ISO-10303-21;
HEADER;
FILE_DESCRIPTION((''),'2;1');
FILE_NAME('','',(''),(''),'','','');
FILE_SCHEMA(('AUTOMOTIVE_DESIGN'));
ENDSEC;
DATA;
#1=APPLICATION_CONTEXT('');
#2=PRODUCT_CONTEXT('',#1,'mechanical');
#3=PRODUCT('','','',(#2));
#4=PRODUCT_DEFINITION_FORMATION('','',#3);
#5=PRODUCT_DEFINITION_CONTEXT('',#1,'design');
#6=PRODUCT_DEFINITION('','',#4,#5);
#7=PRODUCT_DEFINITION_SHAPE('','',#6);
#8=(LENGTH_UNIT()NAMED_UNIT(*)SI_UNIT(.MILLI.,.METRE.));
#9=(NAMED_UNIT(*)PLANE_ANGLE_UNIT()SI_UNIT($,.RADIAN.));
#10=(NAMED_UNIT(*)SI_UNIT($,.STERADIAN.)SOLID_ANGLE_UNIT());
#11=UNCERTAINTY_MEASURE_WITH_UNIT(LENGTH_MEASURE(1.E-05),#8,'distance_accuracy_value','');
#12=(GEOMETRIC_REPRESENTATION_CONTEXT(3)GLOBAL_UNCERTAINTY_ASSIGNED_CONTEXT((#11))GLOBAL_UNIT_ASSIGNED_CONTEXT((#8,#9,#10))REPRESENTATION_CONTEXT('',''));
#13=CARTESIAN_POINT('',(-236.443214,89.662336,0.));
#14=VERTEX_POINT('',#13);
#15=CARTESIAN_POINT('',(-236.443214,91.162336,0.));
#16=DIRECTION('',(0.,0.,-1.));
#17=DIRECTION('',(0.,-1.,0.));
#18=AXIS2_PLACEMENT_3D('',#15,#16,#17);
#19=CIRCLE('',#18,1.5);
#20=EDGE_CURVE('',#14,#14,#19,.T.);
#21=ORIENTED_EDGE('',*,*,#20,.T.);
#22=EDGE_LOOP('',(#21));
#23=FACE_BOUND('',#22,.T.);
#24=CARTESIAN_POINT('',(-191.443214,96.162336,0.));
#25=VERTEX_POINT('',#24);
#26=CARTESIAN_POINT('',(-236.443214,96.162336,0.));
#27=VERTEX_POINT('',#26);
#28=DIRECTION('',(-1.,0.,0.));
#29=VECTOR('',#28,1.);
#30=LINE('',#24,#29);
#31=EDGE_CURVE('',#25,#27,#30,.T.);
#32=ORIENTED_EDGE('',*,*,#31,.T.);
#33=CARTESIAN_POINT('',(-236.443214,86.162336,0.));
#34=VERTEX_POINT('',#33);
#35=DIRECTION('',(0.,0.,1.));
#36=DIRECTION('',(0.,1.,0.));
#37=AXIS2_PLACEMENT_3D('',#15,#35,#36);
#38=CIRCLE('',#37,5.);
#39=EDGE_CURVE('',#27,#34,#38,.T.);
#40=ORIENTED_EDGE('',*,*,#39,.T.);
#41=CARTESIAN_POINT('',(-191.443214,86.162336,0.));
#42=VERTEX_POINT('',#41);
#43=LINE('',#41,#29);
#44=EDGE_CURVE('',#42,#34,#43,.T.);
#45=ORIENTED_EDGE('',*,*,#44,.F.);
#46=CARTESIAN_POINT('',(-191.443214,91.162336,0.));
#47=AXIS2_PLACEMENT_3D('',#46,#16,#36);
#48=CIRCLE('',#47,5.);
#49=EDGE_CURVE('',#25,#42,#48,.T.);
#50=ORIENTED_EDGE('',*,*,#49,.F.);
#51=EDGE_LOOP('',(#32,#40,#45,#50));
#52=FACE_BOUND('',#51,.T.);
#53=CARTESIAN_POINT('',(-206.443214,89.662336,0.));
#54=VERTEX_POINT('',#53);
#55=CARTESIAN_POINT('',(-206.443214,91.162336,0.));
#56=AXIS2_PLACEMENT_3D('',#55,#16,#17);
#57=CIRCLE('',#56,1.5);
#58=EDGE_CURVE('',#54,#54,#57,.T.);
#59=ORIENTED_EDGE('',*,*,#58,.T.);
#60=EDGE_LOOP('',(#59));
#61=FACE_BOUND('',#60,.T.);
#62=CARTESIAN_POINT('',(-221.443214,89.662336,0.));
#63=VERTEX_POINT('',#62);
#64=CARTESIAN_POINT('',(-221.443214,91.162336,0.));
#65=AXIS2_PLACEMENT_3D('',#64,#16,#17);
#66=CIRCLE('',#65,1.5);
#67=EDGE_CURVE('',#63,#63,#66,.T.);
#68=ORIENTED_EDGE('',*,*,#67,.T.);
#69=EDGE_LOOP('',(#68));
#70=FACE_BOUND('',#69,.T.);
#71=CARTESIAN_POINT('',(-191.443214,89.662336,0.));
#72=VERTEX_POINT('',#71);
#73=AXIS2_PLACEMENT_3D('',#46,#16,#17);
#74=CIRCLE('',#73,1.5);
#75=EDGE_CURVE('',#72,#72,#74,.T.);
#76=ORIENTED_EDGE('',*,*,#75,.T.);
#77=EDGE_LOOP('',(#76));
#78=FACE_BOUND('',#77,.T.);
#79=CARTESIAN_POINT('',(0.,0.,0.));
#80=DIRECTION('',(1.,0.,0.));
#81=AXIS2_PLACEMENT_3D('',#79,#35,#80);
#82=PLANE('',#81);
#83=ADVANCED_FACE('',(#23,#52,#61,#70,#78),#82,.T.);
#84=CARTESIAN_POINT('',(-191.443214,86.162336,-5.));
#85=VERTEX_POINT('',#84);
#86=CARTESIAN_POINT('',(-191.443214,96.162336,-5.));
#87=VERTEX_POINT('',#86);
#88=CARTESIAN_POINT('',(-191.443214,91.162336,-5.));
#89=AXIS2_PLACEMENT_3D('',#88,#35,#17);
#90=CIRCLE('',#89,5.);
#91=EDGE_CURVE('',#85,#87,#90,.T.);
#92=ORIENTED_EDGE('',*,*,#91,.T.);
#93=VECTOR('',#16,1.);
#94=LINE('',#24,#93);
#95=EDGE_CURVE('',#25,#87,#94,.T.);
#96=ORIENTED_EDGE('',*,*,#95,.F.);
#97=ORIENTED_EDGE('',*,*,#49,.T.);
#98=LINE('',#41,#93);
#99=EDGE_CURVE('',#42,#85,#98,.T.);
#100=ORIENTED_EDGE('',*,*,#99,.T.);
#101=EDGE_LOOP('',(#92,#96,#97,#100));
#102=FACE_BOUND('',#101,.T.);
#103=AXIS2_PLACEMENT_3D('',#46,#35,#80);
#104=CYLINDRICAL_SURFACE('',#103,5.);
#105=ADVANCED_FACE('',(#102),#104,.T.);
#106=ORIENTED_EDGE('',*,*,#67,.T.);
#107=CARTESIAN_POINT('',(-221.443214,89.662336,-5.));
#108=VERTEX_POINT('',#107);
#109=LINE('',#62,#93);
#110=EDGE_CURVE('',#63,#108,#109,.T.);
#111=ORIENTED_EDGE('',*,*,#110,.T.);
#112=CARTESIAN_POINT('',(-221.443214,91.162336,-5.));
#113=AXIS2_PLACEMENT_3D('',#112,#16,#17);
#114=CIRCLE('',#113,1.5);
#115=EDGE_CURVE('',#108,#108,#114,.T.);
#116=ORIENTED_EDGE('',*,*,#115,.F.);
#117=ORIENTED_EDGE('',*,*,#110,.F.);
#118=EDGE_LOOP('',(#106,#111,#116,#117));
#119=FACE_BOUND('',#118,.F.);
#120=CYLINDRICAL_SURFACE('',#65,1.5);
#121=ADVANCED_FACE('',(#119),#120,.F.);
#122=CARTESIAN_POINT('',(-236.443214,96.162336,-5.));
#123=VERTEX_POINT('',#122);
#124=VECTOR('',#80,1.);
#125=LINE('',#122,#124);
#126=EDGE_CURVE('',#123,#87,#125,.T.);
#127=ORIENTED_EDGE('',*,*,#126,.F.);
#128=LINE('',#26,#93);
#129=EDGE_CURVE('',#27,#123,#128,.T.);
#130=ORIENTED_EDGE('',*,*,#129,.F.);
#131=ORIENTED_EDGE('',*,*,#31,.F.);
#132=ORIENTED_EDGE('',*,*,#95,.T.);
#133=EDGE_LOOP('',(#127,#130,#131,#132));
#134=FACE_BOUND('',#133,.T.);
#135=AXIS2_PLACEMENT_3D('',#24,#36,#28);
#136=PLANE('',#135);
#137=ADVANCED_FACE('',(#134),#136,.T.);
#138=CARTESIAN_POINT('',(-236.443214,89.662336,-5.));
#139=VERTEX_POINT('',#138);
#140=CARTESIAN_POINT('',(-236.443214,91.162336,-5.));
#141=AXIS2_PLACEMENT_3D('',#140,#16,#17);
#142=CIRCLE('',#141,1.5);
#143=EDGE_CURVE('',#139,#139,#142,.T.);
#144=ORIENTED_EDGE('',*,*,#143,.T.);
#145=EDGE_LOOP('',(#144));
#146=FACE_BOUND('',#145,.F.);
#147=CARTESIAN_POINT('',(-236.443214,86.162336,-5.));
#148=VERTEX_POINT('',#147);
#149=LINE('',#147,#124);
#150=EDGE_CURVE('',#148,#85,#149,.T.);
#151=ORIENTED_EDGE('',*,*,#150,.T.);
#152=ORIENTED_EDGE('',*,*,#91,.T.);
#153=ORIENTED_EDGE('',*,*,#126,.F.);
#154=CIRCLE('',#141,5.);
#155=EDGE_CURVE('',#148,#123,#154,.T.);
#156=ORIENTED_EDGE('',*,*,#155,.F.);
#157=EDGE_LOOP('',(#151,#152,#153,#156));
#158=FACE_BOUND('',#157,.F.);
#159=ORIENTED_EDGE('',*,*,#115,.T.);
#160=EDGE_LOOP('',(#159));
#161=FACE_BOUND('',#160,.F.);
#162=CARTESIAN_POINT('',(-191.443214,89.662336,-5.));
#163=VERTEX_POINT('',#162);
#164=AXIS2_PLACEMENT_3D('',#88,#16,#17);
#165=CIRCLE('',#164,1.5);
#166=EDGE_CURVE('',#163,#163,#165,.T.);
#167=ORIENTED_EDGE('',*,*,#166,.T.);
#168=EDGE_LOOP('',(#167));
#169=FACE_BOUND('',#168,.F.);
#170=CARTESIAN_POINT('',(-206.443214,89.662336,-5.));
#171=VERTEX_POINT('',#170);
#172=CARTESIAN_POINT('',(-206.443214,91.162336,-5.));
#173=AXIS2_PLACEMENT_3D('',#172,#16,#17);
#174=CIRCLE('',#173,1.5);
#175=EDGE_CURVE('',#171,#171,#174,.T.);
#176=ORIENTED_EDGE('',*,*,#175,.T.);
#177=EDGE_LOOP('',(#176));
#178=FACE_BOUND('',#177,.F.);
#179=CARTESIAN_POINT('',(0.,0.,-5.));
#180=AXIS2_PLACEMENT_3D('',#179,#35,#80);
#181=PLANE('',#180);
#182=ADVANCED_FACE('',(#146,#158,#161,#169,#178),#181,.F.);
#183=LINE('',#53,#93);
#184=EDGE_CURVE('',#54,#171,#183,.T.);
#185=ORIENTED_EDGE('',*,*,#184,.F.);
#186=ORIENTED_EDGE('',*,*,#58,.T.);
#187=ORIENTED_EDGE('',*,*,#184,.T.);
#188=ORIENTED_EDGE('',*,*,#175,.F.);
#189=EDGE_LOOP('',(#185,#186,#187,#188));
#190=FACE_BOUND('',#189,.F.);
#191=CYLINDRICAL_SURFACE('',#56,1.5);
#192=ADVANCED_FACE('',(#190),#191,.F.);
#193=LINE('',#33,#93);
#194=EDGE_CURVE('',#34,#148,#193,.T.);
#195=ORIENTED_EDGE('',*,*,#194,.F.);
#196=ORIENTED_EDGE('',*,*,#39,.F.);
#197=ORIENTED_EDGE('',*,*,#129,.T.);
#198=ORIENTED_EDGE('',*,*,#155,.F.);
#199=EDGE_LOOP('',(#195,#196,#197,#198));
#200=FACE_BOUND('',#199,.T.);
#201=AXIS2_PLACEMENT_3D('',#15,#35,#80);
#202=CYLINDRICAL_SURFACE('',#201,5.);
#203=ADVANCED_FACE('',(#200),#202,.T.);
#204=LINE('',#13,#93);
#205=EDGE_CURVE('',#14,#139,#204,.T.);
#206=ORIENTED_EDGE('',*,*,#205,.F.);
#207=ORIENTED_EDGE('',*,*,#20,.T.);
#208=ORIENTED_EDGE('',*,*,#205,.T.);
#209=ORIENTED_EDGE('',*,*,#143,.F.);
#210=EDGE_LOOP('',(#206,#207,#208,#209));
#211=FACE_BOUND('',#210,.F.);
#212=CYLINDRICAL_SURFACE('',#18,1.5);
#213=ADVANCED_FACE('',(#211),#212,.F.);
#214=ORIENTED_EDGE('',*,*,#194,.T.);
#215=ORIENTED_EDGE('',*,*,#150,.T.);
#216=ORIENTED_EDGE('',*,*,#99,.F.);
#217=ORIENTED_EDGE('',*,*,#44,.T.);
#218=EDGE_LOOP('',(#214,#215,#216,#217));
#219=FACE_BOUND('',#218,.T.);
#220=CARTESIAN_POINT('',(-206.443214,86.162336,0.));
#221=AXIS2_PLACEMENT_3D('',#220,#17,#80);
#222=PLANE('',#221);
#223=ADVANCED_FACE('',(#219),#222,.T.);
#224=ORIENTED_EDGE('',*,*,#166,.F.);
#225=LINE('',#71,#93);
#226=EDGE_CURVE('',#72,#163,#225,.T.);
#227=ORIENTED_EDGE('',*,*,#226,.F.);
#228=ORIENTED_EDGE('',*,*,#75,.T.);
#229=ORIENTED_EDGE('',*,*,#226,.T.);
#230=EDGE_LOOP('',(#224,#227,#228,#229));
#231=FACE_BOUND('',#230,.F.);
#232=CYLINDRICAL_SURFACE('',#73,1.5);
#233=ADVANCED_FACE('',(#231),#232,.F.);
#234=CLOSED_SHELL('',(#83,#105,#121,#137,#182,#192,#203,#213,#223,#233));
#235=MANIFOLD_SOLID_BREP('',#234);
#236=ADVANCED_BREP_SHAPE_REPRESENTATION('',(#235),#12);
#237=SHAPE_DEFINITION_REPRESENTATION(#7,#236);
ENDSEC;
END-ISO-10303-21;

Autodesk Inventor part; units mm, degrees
ref_plane "YZ Plane" through (0, 0, 0) normal (1, 0, 0) x (0, 1, 0)
ref_plane "XZ Plane" through (0, 0, 0) normal (0, 1, 0) x (-1, 0, 0)
ref_plane "XY Plane" through (0, 0, 0) normal (0, 0, 1) x (1, 0, 0)
sketch "スケッチ1" plane through (0, 0, 0) normal (0, 0, 1) x (1, 0, 0)
  circle A0 centre (-137.47813, 108.715013) radius 1.5
  circle A1 centre (-137.47813, 108.715013) radius 4
  circle A2 centre (-84.833891, 108.084965) radius 1.5
  circle A3 centre (-84.833891, 108.084965) radius 4
  arc A4 (-118.947299, 71.123436) -> (-117.73095, 71.382243) centre (-118.502117, 72.018876) ccw
  arc A5 (-114.600271, 73.907195) -> (-117.73095, 71.382243) centre (-110, 65) ccw
  arc A6 (-114.600271, 73.907195) -> (-114.089743, 75.041147) centre (-115.059151, 74.795694) ccw
  line L0 (-114.089743, 75.041147) -> (-119.33341, 95.750821)
  arc A7 (-119.33341, 95.750821) -> (-120.080809, 96.480412) centre (-120.302818, 95.505368) ccw
  arc A8 (-121.730917, 97.23053) -> (-120.080809, 96.480412) centre (-119.081767, 100.868113) ccw
  arc A9 (-121.730917, 97.23053) -> (-122.772044, 97.31398) centre (-122.319616, 96.422178) ccw
  line L1 (-122.772044, 97.31398) -> (-145.176978, 85.94755)
  arc A10 (-145.176978, 85.94755) -> (-145.169733, 84.160308) centre (-144.724551, 85.055748) ccw
  line L2 (-145.169733, 84.160308) -> (-118.947299, 71.123436)
  arc A11 (-111.181518, 75.777506) -> (-110.19287, 75.023145) centre (-110.212109, 76.022959) ccw
  arc A12 (-100.681376, 68.696468) -> (-110.19287, 75.023145) centre (-110, 65) ccw
  arc A13 (-100.681376, 68.696468) -> (-99.603497, 68.076257) centre (-99.751838, 69.065193) ccw
  line L3 (-99.603497, 68.076257) -> (-77.042446, 71.460414)
  arc A14 (-77.042446, 71.460414) -> (-76.670938, 73.303609) centre (-77.190786, 72.449351) ccw
  line L4 (-76.670938, 73.303609) -> (-114.637331, 96.407596)
  arc A15 (-114.637331, 96.407596) -> (-116.126588, 95.307885) centre (-115.15718, 95.553338) ccw
  line L5 (-116.126588, 95.307885) -> (-111.181518, 75.777506)
  circle A16 centre (-150.294817, 85.033166) radius 1.5
  arc A17 (-124.129325, 99.989384) -> (-123.581755, 100.878808) centre (-124.581752, 100.881185) ccw
  arc A18 (-114.594354, 100.531773) -> (-123.581755, 100.878808) centre (-119.081767, 100.868113) ccw
  arc A19 (-114.594354, 100.531773) -> (-114.117, 99.602773) centre (-113.597151, 100.457031) ccw
  line L6 (-114.117, 99.602773) -> (-73.405222, 74.828115)
  arc A20 (-73.405222, 74.828115) -> (-72.36076, 74.831033) centre (-72.885373, 75.682374) ccw
  arc A21 (-73.660486, 68.382589) -> (-72.36076, 74.831033) centre (-70, 71) ccw
  arc A22 (-73.660486, 68.382589) -> (-74.622268, 68.789879) centre (-74.473928, 67.800942) ccw
  line L7 (-74.622268, 68.789879) -> (-99.158476, 65.109447)
  arc A23 (-99.158476, 65.109447) -> (-100.006948, 64.200283) centre (-99.010135, 64.120511) ccw
  arc A24 (-119.754961, 67.311137) -> (-100.006948, 64.200283) centre (-110, 65) ccw
  arc A25 (-119.754961, 67.311137) -> (-120.282843, 68.437115) centre (-120.728025, 67.541674) ccw
  line L8 (-120.282843, 68.437115) -> (-147.085218, 81.762313)
  arc A26 (-147.085218, 81.762313) -> (-148.083283, 81.700131) centre (-147.5304, 80.866873) ccw
  arc A27 (-148.11038, 88.384022) -> (-148.083283, 81.700131) centre (-150.294817, 85.033166) ccw
  arc A28 (-148.11038, 88.384022) -> (-147.111844, 88.329935) centre (-147.564271, 89.221736) ccw
  line L9 (-147.111844, 88.329935) -> (-124.129325, 99.989384)
  circle A29 centre (-110, 65) radius 7.025
  circle A30 centre (-119.081767, 100.868113) radius 1.5
  circle A31 centre (-70, 71) radius 1.5
  line L10 (-330.399972, 95) -> (-110, 65)
  circle A32 centre (-156.443214, 91.162336) radius 4
  circle A33 centre (-136.470623, 92.209055) radius 4
  line L11 (0, 0) -> (-155.794817, 0)
  line L12 (-329.051247, 104.90863) -> (-108.651275, 74.90863)
  circle A34 centre (-156.443214, 91.162336) radius 9
  circle A35 centre (-136.470623, 92.209055) radius 6
  line L13 (-156.443214, 91.162336) -> (-136.470623, 92.209055)
  circle A36 centre (-110, 65) radius 65
  circle A37 centre (-191.443214, 91.162336) radius 5
  line L14 (-191.443214, 91.162336) -> (-156.443214, 91.162336)
  line L15 (-191.443214, 91.162336) -> (-206.443214, 91.162336)
  circle A38 centre (-206.443214, 91.162336) radius 5
  line L16 (-206.443214, 91.162336) -> (-221.443214, 91.162336)
  circle A39 centre (-221.443214, 91.162336) radius 5
  line L17 (-221.443214, 91.162336) -> (-236.443214, 91.162336)
  circle A40 centre (-236.443214, 91.162336) radius 5
  line L18 (-206.843214, 96.14631) -> (-157.163214, 100.133489)
  line L19 (-206.843214, 86.178361) -> (-157.163214, 82.191182)
  line L20 (-135.882319, 98.180143) -> (-155.560758, 100.118968)
  line L21 (-154.629369, 82.34701) -> (-135.261393, 86.332171)
  circle A41 centre (-206.443214, 91.162336) radius 1.5
  circle A42 centre (-191.443214, 91.162336) radius 1.5
  line L22 (-236.443214, 91.162336) -> (-191.443214, 91.162336) construction
  line L23 (-236.443214, 86.162336) -> (-191.443214, 86.162336)
  line L24 (-191.443214, 96.162336) -> (-236.443214, 96.162336)
  arc A43 (-236.443214, 96.162336) -> (-236.443214, 86.162336) centre (-236.443214, 91.162336) ccw
  arc A44 (-191.443214, 86.162336) -> (-191.443214, 96.162336) centre (-191.443214, 91.162336) ccw
  point P0 (-202.811763, 87.725395)
  point P1 (-169.324077, 83.167179)
  point P2 (-153.510113, 82.653698)
  point P3 (-153.460125, 82.587594)
  point P4 (-191.336809, 86.163468)
  point P5 (-192.881846, 86.373772)
  point P6 (-213.943214, 91.162336)
  dimension "d0" = 8
  dimension "d1" = 8
  dimension "d2" = 95
  dimension "d3" = 7.75125
  dimension "d4" = 10
  dimension "d5" = 18
  dimension "d6" = 12
  dimension "d7" = 20
  dimension "d8" = 3
  dimension "d9" = 130
  dimension "d10" = 10
  dimension "d11" = 35
  dimension "d12" = 15
  dimension "d13" = 10
  dimension "d14" = 15
  dimension "d15" = 10
  dimension "d16" = 15
  dimension "d17" = 10
  dimension "d18" = 3
  dimension "d19" = 3
  dimension "d20" = 10
extrude "押し出し1" add sketch "スケッチ1" against normal blind 5 contours A37 L12 | L12 A37 L15 A42 L14 | L23 A39 L12 A38 L19 | L19 A38 L23 | A37 L23 A38 L12 | L12 A38 L15 A37 | L14 A42 L15 A37 | A38 L12 | L23 A40 L17 L12 A39 | A39 L12 | L12 A38 L16 A41 L15 | L15 A38 L24 A37 | A42 L15 L14 | L14 L15 A42 | L24 A38 L18 | L18 A38 L16 A39 L24 | L12 A39 L16 A38 | A39 L17 L16 L12 | L12 L17 A39 | A40 L12 | L15 A41 L16 A38 | A39 L16 L17 | A39 L17 L12 A40 L24 | L17 A40 L12 | A40 L12 | A41 L16 L15 | L15 L16 A41
hole "穴1" at (-236.443214, 91.162336, 0) at (-221.443214, 91.162336, 0) at (-206.443214, 91.162336, 0) at (-191.443214, 91.162336, 0) direction (0, 0, -1) diameter 3 depth 12 tip angle 118
properties part number "カウンター 取り付け根元延長"
